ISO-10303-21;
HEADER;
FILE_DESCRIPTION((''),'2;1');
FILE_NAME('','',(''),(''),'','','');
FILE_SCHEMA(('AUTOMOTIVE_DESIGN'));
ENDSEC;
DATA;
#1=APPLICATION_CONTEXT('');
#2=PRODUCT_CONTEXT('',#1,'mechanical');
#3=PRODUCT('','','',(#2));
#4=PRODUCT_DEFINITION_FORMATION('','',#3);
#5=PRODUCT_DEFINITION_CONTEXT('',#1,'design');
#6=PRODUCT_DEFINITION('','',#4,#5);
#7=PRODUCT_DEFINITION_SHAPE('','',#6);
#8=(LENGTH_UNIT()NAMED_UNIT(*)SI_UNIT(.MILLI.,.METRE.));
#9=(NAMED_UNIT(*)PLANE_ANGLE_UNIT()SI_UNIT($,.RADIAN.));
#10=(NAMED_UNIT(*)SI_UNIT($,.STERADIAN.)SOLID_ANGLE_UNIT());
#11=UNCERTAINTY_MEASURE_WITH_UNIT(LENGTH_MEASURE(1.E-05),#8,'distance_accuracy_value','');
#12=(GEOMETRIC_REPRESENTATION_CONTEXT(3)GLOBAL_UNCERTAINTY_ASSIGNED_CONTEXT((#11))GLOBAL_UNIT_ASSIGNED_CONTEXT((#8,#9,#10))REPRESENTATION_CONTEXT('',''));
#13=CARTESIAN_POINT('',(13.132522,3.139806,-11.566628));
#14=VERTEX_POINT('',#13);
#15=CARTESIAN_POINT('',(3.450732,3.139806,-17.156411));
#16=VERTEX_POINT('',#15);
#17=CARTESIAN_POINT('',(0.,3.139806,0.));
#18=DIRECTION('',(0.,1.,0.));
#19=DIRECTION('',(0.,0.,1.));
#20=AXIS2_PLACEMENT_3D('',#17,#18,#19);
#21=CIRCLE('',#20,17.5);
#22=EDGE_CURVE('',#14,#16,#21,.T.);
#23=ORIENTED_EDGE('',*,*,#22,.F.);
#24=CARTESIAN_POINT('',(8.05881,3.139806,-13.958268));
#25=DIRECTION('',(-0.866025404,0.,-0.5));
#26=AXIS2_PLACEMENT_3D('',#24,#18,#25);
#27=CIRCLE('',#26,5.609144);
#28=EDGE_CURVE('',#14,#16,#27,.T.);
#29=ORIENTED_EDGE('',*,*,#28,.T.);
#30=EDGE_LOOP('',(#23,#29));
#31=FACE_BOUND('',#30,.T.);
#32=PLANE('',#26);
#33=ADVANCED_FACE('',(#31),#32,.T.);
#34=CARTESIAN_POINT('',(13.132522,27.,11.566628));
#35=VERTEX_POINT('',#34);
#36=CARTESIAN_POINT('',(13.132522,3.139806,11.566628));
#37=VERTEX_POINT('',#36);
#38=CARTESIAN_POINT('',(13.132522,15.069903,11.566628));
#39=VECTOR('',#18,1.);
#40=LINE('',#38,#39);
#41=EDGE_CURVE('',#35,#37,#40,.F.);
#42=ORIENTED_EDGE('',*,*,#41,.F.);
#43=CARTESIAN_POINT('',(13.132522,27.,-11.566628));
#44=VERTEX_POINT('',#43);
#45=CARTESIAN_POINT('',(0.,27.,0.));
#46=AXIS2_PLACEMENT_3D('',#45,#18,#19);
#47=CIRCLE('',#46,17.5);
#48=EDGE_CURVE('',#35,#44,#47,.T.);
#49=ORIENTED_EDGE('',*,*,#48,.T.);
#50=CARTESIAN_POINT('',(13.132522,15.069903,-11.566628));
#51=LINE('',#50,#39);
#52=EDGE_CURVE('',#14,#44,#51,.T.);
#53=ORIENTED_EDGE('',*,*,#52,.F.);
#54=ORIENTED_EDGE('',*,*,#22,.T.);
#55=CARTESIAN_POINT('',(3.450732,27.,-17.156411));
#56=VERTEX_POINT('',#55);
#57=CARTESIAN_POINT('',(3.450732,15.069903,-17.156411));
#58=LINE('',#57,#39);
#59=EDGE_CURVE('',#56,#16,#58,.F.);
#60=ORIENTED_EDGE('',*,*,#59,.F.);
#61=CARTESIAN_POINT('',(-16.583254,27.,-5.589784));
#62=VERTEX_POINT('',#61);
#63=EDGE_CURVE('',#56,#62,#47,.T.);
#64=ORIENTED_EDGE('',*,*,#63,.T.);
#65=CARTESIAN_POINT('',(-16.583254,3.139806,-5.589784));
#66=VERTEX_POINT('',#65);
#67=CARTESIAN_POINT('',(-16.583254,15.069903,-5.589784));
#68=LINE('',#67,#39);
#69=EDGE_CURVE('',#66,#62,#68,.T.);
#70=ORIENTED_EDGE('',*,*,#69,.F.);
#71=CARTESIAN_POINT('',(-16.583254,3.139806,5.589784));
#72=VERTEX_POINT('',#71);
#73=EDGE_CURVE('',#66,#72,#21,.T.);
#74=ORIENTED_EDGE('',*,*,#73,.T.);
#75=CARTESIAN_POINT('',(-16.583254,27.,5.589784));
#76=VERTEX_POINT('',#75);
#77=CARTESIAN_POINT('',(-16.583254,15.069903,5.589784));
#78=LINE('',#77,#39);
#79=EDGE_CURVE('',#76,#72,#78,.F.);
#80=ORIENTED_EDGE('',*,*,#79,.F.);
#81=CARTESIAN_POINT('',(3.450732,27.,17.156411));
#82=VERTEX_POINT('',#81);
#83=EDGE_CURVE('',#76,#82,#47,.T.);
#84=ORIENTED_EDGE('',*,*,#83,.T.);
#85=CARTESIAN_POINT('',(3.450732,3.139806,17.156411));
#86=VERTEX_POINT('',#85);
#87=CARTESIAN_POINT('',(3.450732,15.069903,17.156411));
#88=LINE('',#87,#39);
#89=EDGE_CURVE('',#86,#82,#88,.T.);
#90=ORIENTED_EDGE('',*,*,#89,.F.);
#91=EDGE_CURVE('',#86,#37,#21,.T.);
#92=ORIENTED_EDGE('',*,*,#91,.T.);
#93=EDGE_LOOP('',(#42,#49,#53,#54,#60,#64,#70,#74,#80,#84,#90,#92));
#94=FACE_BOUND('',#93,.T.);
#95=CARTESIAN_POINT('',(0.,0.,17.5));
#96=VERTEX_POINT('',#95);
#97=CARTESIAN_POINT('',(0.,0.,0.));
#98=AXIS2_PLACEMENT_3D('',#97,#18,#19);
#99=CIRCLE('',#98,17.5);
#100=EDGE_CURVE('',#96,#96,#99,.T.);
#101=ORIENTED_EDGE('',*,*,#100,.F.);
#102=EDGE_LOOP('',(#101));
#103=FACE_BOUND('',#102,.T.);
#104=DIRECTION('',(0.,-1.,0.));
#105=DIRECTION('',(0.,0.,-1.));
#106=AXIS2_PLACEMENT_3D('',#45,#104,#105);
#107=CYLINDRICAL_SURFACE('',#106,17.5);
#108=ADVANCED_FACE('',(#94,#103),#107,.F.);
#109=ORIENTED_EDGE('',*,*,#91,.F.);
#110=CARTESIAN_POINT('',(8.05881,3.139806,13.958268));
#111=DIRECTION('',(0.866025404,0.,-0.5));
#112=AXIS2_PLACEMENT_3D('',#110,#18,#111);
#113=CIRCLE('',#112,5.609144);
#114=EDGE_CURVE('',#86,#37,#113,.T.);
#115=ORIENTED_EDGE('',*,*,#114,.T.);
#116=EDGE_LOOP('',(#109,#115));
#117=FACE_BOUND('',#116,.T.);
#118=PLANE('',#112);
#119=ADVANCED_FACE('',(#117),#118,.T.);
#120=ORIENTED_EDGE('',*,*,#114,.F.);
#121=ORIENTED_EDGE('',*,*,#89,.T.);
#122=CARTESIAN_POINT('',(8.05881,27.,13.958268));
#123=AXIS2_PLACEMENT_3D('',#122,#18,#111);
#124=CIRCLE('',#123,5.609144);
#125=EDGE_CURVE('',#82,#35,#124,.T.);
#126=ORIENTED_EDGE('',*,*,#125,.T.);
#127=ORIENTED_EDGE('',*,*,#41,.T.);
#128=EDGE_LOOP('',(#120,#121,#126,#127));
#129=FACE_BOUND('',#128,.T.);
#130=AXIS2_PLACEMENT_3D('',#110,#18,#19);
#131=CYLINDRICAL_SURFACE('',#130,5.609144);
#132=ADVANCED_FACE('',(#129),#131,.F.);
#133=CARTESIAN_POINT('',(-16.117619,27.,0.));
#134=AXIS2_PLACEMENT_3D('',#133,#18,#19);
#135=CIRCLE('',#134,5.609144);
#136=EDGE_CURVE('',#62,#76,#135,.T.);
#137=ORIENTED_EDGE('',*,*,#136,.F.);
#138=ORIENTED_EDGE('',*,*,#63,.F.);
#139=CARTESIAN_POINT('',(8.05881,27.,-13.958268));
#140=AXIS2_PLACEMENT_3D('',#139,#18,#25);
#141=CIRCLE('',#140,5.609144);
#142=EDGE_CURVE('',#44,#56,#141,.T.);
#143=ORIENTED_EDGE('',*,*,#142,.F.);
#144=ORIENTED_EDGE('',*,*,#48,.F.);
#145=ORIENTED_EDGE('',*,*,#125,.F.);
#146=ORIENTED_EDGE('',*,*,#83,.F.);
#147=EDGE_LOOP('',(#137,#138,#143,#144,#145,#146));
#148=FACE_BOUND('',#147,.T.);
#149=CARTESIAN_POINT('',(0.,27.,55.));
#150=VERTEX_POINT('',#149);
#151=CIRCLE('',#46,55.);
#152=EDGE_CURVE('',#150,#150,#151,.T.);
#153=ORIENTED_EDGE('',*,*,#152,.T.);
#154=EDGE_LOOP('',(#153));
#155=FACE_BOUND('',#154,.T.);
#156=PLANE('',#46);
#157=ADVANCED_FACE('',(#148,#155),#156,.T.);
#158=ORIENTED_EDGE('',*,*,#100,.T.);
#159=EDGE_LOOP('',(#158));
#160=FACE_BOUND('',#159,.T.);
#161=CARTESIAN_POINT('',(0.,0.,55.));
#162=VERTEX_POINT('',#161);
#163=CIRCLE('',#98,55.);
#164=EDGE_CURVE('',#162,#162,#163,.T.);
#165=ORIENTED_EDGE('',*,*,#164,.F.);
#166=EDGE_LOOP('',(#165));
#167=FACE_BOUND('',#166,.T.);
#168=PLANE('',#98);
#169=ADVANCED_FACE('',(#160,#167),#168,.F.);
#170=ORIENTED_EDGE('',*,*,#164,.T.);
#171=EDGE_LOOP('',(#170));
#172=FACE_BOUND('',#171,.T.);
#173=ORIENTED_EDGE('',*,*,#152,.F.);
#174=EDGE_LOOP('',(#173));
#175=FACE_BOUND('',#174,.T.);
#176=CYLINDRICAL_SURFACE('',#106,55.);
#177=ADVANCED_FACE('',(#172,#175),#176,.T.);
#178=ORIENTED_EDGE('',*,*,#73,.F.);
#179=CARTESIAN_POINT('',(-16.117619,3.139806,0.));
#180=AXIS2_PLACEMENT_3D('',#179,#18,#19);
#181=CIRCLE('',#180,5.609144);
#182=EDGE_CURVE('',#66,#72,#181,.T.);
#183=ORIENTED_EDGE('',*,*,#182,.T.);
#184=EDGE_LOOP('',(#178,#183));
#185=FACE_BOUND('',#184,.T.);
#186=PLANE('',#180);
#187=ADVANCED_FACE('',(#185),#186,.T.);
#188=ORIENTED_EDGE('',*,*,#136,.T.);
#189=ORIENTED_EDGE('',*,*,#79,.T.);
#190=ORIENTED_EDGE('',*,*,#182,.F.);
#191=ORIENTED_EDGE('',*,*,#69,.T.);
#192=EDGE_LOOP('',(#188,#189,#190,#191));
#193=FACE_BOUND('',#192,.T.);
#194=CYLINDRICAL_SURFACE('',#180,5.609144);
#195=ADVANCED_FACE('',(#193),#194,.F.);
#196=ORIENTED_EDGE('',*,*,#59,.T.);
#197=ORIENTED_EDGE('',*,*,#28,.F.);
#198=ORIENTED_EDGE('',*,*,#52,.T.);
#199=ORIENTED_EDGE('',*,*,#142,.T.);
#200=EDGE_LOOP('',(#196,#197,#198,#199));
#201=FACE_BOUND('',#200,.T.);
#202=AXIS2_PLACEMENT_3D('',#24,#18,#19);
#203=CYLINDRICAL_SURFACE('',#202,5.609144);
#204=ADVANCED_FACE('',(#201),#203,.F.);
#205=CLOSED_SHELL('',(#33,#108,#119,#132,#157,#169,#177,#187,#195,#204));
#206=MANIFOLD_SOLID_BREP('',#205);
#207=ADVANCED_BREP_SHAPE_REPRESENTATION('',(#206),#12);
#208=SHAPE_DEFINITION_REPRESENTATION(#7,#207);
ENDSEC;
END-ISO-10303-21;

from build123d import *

# Parameters (mm, degrees)
SKETCH1_R           = 55
BOSS_EXTRUDE1_DEPTH = 27
SKETCH2_R           = 17.5
CUT_EXTRUDE1_DEPTH  = 83.33468285
SKETCH3_R           = 5.609144045
CUT_EXTRUDE2_DEPTH  = 23.86019443
CIRPATTERN1_COUNT   = 3


with BuildPart() as part:
    # Sketch1 → Boss-Extrude1 (new body)
    with BuildSketch(Plane(origin=(0, 0, 0), x_dir=(1, 0, 0), z_dir=(0, 1, 0))):
        Circle(SKETCH1_R)
    extrude(amount=BOSS_EXTRUDE1_DEPTH)

    # Sketch2 → Cut-Extrude1 (cut, through all)
    with BuildSketch(Plane(origin=(0, 0, 0), x_dir=(1, 0, 0), z_dir=(0, 1, 0))):
        Circle(SKETCH2_R)
    extrude(amount=CUT_EXTRUDE1_DEPTH, mode=Mode.SUBTRACT)

    # Sketch3 → Cut-Extrude2 (cut)
    with BuildSketch(Plane(origin=(0, 27, 0), x_dir=(1, 0, 0), z_dir=(0, 1, 0))):
        with Locations((-16.117619445, 0)):
            Circle(SKETCH3_R)
    cut_extrude2 = extrude(amount=-CUT_EXTRUDE2_DEPTH, mode=Mode.SUBTRACT)

    # CirPattern1: Cut-Extrude2 ×3 about axis
    cirpattern1_axis = Axis((0, 0, 0), (0, 1, 0))
    for i in range(1, CIRPATTERN1_COUNT):
        add(cut_extrude2.rotate(cirpattern1_axis, i * 360 / CIRPATTERN1_COUNT), mode=Mode.SUBTRACT)


solid = part.part
